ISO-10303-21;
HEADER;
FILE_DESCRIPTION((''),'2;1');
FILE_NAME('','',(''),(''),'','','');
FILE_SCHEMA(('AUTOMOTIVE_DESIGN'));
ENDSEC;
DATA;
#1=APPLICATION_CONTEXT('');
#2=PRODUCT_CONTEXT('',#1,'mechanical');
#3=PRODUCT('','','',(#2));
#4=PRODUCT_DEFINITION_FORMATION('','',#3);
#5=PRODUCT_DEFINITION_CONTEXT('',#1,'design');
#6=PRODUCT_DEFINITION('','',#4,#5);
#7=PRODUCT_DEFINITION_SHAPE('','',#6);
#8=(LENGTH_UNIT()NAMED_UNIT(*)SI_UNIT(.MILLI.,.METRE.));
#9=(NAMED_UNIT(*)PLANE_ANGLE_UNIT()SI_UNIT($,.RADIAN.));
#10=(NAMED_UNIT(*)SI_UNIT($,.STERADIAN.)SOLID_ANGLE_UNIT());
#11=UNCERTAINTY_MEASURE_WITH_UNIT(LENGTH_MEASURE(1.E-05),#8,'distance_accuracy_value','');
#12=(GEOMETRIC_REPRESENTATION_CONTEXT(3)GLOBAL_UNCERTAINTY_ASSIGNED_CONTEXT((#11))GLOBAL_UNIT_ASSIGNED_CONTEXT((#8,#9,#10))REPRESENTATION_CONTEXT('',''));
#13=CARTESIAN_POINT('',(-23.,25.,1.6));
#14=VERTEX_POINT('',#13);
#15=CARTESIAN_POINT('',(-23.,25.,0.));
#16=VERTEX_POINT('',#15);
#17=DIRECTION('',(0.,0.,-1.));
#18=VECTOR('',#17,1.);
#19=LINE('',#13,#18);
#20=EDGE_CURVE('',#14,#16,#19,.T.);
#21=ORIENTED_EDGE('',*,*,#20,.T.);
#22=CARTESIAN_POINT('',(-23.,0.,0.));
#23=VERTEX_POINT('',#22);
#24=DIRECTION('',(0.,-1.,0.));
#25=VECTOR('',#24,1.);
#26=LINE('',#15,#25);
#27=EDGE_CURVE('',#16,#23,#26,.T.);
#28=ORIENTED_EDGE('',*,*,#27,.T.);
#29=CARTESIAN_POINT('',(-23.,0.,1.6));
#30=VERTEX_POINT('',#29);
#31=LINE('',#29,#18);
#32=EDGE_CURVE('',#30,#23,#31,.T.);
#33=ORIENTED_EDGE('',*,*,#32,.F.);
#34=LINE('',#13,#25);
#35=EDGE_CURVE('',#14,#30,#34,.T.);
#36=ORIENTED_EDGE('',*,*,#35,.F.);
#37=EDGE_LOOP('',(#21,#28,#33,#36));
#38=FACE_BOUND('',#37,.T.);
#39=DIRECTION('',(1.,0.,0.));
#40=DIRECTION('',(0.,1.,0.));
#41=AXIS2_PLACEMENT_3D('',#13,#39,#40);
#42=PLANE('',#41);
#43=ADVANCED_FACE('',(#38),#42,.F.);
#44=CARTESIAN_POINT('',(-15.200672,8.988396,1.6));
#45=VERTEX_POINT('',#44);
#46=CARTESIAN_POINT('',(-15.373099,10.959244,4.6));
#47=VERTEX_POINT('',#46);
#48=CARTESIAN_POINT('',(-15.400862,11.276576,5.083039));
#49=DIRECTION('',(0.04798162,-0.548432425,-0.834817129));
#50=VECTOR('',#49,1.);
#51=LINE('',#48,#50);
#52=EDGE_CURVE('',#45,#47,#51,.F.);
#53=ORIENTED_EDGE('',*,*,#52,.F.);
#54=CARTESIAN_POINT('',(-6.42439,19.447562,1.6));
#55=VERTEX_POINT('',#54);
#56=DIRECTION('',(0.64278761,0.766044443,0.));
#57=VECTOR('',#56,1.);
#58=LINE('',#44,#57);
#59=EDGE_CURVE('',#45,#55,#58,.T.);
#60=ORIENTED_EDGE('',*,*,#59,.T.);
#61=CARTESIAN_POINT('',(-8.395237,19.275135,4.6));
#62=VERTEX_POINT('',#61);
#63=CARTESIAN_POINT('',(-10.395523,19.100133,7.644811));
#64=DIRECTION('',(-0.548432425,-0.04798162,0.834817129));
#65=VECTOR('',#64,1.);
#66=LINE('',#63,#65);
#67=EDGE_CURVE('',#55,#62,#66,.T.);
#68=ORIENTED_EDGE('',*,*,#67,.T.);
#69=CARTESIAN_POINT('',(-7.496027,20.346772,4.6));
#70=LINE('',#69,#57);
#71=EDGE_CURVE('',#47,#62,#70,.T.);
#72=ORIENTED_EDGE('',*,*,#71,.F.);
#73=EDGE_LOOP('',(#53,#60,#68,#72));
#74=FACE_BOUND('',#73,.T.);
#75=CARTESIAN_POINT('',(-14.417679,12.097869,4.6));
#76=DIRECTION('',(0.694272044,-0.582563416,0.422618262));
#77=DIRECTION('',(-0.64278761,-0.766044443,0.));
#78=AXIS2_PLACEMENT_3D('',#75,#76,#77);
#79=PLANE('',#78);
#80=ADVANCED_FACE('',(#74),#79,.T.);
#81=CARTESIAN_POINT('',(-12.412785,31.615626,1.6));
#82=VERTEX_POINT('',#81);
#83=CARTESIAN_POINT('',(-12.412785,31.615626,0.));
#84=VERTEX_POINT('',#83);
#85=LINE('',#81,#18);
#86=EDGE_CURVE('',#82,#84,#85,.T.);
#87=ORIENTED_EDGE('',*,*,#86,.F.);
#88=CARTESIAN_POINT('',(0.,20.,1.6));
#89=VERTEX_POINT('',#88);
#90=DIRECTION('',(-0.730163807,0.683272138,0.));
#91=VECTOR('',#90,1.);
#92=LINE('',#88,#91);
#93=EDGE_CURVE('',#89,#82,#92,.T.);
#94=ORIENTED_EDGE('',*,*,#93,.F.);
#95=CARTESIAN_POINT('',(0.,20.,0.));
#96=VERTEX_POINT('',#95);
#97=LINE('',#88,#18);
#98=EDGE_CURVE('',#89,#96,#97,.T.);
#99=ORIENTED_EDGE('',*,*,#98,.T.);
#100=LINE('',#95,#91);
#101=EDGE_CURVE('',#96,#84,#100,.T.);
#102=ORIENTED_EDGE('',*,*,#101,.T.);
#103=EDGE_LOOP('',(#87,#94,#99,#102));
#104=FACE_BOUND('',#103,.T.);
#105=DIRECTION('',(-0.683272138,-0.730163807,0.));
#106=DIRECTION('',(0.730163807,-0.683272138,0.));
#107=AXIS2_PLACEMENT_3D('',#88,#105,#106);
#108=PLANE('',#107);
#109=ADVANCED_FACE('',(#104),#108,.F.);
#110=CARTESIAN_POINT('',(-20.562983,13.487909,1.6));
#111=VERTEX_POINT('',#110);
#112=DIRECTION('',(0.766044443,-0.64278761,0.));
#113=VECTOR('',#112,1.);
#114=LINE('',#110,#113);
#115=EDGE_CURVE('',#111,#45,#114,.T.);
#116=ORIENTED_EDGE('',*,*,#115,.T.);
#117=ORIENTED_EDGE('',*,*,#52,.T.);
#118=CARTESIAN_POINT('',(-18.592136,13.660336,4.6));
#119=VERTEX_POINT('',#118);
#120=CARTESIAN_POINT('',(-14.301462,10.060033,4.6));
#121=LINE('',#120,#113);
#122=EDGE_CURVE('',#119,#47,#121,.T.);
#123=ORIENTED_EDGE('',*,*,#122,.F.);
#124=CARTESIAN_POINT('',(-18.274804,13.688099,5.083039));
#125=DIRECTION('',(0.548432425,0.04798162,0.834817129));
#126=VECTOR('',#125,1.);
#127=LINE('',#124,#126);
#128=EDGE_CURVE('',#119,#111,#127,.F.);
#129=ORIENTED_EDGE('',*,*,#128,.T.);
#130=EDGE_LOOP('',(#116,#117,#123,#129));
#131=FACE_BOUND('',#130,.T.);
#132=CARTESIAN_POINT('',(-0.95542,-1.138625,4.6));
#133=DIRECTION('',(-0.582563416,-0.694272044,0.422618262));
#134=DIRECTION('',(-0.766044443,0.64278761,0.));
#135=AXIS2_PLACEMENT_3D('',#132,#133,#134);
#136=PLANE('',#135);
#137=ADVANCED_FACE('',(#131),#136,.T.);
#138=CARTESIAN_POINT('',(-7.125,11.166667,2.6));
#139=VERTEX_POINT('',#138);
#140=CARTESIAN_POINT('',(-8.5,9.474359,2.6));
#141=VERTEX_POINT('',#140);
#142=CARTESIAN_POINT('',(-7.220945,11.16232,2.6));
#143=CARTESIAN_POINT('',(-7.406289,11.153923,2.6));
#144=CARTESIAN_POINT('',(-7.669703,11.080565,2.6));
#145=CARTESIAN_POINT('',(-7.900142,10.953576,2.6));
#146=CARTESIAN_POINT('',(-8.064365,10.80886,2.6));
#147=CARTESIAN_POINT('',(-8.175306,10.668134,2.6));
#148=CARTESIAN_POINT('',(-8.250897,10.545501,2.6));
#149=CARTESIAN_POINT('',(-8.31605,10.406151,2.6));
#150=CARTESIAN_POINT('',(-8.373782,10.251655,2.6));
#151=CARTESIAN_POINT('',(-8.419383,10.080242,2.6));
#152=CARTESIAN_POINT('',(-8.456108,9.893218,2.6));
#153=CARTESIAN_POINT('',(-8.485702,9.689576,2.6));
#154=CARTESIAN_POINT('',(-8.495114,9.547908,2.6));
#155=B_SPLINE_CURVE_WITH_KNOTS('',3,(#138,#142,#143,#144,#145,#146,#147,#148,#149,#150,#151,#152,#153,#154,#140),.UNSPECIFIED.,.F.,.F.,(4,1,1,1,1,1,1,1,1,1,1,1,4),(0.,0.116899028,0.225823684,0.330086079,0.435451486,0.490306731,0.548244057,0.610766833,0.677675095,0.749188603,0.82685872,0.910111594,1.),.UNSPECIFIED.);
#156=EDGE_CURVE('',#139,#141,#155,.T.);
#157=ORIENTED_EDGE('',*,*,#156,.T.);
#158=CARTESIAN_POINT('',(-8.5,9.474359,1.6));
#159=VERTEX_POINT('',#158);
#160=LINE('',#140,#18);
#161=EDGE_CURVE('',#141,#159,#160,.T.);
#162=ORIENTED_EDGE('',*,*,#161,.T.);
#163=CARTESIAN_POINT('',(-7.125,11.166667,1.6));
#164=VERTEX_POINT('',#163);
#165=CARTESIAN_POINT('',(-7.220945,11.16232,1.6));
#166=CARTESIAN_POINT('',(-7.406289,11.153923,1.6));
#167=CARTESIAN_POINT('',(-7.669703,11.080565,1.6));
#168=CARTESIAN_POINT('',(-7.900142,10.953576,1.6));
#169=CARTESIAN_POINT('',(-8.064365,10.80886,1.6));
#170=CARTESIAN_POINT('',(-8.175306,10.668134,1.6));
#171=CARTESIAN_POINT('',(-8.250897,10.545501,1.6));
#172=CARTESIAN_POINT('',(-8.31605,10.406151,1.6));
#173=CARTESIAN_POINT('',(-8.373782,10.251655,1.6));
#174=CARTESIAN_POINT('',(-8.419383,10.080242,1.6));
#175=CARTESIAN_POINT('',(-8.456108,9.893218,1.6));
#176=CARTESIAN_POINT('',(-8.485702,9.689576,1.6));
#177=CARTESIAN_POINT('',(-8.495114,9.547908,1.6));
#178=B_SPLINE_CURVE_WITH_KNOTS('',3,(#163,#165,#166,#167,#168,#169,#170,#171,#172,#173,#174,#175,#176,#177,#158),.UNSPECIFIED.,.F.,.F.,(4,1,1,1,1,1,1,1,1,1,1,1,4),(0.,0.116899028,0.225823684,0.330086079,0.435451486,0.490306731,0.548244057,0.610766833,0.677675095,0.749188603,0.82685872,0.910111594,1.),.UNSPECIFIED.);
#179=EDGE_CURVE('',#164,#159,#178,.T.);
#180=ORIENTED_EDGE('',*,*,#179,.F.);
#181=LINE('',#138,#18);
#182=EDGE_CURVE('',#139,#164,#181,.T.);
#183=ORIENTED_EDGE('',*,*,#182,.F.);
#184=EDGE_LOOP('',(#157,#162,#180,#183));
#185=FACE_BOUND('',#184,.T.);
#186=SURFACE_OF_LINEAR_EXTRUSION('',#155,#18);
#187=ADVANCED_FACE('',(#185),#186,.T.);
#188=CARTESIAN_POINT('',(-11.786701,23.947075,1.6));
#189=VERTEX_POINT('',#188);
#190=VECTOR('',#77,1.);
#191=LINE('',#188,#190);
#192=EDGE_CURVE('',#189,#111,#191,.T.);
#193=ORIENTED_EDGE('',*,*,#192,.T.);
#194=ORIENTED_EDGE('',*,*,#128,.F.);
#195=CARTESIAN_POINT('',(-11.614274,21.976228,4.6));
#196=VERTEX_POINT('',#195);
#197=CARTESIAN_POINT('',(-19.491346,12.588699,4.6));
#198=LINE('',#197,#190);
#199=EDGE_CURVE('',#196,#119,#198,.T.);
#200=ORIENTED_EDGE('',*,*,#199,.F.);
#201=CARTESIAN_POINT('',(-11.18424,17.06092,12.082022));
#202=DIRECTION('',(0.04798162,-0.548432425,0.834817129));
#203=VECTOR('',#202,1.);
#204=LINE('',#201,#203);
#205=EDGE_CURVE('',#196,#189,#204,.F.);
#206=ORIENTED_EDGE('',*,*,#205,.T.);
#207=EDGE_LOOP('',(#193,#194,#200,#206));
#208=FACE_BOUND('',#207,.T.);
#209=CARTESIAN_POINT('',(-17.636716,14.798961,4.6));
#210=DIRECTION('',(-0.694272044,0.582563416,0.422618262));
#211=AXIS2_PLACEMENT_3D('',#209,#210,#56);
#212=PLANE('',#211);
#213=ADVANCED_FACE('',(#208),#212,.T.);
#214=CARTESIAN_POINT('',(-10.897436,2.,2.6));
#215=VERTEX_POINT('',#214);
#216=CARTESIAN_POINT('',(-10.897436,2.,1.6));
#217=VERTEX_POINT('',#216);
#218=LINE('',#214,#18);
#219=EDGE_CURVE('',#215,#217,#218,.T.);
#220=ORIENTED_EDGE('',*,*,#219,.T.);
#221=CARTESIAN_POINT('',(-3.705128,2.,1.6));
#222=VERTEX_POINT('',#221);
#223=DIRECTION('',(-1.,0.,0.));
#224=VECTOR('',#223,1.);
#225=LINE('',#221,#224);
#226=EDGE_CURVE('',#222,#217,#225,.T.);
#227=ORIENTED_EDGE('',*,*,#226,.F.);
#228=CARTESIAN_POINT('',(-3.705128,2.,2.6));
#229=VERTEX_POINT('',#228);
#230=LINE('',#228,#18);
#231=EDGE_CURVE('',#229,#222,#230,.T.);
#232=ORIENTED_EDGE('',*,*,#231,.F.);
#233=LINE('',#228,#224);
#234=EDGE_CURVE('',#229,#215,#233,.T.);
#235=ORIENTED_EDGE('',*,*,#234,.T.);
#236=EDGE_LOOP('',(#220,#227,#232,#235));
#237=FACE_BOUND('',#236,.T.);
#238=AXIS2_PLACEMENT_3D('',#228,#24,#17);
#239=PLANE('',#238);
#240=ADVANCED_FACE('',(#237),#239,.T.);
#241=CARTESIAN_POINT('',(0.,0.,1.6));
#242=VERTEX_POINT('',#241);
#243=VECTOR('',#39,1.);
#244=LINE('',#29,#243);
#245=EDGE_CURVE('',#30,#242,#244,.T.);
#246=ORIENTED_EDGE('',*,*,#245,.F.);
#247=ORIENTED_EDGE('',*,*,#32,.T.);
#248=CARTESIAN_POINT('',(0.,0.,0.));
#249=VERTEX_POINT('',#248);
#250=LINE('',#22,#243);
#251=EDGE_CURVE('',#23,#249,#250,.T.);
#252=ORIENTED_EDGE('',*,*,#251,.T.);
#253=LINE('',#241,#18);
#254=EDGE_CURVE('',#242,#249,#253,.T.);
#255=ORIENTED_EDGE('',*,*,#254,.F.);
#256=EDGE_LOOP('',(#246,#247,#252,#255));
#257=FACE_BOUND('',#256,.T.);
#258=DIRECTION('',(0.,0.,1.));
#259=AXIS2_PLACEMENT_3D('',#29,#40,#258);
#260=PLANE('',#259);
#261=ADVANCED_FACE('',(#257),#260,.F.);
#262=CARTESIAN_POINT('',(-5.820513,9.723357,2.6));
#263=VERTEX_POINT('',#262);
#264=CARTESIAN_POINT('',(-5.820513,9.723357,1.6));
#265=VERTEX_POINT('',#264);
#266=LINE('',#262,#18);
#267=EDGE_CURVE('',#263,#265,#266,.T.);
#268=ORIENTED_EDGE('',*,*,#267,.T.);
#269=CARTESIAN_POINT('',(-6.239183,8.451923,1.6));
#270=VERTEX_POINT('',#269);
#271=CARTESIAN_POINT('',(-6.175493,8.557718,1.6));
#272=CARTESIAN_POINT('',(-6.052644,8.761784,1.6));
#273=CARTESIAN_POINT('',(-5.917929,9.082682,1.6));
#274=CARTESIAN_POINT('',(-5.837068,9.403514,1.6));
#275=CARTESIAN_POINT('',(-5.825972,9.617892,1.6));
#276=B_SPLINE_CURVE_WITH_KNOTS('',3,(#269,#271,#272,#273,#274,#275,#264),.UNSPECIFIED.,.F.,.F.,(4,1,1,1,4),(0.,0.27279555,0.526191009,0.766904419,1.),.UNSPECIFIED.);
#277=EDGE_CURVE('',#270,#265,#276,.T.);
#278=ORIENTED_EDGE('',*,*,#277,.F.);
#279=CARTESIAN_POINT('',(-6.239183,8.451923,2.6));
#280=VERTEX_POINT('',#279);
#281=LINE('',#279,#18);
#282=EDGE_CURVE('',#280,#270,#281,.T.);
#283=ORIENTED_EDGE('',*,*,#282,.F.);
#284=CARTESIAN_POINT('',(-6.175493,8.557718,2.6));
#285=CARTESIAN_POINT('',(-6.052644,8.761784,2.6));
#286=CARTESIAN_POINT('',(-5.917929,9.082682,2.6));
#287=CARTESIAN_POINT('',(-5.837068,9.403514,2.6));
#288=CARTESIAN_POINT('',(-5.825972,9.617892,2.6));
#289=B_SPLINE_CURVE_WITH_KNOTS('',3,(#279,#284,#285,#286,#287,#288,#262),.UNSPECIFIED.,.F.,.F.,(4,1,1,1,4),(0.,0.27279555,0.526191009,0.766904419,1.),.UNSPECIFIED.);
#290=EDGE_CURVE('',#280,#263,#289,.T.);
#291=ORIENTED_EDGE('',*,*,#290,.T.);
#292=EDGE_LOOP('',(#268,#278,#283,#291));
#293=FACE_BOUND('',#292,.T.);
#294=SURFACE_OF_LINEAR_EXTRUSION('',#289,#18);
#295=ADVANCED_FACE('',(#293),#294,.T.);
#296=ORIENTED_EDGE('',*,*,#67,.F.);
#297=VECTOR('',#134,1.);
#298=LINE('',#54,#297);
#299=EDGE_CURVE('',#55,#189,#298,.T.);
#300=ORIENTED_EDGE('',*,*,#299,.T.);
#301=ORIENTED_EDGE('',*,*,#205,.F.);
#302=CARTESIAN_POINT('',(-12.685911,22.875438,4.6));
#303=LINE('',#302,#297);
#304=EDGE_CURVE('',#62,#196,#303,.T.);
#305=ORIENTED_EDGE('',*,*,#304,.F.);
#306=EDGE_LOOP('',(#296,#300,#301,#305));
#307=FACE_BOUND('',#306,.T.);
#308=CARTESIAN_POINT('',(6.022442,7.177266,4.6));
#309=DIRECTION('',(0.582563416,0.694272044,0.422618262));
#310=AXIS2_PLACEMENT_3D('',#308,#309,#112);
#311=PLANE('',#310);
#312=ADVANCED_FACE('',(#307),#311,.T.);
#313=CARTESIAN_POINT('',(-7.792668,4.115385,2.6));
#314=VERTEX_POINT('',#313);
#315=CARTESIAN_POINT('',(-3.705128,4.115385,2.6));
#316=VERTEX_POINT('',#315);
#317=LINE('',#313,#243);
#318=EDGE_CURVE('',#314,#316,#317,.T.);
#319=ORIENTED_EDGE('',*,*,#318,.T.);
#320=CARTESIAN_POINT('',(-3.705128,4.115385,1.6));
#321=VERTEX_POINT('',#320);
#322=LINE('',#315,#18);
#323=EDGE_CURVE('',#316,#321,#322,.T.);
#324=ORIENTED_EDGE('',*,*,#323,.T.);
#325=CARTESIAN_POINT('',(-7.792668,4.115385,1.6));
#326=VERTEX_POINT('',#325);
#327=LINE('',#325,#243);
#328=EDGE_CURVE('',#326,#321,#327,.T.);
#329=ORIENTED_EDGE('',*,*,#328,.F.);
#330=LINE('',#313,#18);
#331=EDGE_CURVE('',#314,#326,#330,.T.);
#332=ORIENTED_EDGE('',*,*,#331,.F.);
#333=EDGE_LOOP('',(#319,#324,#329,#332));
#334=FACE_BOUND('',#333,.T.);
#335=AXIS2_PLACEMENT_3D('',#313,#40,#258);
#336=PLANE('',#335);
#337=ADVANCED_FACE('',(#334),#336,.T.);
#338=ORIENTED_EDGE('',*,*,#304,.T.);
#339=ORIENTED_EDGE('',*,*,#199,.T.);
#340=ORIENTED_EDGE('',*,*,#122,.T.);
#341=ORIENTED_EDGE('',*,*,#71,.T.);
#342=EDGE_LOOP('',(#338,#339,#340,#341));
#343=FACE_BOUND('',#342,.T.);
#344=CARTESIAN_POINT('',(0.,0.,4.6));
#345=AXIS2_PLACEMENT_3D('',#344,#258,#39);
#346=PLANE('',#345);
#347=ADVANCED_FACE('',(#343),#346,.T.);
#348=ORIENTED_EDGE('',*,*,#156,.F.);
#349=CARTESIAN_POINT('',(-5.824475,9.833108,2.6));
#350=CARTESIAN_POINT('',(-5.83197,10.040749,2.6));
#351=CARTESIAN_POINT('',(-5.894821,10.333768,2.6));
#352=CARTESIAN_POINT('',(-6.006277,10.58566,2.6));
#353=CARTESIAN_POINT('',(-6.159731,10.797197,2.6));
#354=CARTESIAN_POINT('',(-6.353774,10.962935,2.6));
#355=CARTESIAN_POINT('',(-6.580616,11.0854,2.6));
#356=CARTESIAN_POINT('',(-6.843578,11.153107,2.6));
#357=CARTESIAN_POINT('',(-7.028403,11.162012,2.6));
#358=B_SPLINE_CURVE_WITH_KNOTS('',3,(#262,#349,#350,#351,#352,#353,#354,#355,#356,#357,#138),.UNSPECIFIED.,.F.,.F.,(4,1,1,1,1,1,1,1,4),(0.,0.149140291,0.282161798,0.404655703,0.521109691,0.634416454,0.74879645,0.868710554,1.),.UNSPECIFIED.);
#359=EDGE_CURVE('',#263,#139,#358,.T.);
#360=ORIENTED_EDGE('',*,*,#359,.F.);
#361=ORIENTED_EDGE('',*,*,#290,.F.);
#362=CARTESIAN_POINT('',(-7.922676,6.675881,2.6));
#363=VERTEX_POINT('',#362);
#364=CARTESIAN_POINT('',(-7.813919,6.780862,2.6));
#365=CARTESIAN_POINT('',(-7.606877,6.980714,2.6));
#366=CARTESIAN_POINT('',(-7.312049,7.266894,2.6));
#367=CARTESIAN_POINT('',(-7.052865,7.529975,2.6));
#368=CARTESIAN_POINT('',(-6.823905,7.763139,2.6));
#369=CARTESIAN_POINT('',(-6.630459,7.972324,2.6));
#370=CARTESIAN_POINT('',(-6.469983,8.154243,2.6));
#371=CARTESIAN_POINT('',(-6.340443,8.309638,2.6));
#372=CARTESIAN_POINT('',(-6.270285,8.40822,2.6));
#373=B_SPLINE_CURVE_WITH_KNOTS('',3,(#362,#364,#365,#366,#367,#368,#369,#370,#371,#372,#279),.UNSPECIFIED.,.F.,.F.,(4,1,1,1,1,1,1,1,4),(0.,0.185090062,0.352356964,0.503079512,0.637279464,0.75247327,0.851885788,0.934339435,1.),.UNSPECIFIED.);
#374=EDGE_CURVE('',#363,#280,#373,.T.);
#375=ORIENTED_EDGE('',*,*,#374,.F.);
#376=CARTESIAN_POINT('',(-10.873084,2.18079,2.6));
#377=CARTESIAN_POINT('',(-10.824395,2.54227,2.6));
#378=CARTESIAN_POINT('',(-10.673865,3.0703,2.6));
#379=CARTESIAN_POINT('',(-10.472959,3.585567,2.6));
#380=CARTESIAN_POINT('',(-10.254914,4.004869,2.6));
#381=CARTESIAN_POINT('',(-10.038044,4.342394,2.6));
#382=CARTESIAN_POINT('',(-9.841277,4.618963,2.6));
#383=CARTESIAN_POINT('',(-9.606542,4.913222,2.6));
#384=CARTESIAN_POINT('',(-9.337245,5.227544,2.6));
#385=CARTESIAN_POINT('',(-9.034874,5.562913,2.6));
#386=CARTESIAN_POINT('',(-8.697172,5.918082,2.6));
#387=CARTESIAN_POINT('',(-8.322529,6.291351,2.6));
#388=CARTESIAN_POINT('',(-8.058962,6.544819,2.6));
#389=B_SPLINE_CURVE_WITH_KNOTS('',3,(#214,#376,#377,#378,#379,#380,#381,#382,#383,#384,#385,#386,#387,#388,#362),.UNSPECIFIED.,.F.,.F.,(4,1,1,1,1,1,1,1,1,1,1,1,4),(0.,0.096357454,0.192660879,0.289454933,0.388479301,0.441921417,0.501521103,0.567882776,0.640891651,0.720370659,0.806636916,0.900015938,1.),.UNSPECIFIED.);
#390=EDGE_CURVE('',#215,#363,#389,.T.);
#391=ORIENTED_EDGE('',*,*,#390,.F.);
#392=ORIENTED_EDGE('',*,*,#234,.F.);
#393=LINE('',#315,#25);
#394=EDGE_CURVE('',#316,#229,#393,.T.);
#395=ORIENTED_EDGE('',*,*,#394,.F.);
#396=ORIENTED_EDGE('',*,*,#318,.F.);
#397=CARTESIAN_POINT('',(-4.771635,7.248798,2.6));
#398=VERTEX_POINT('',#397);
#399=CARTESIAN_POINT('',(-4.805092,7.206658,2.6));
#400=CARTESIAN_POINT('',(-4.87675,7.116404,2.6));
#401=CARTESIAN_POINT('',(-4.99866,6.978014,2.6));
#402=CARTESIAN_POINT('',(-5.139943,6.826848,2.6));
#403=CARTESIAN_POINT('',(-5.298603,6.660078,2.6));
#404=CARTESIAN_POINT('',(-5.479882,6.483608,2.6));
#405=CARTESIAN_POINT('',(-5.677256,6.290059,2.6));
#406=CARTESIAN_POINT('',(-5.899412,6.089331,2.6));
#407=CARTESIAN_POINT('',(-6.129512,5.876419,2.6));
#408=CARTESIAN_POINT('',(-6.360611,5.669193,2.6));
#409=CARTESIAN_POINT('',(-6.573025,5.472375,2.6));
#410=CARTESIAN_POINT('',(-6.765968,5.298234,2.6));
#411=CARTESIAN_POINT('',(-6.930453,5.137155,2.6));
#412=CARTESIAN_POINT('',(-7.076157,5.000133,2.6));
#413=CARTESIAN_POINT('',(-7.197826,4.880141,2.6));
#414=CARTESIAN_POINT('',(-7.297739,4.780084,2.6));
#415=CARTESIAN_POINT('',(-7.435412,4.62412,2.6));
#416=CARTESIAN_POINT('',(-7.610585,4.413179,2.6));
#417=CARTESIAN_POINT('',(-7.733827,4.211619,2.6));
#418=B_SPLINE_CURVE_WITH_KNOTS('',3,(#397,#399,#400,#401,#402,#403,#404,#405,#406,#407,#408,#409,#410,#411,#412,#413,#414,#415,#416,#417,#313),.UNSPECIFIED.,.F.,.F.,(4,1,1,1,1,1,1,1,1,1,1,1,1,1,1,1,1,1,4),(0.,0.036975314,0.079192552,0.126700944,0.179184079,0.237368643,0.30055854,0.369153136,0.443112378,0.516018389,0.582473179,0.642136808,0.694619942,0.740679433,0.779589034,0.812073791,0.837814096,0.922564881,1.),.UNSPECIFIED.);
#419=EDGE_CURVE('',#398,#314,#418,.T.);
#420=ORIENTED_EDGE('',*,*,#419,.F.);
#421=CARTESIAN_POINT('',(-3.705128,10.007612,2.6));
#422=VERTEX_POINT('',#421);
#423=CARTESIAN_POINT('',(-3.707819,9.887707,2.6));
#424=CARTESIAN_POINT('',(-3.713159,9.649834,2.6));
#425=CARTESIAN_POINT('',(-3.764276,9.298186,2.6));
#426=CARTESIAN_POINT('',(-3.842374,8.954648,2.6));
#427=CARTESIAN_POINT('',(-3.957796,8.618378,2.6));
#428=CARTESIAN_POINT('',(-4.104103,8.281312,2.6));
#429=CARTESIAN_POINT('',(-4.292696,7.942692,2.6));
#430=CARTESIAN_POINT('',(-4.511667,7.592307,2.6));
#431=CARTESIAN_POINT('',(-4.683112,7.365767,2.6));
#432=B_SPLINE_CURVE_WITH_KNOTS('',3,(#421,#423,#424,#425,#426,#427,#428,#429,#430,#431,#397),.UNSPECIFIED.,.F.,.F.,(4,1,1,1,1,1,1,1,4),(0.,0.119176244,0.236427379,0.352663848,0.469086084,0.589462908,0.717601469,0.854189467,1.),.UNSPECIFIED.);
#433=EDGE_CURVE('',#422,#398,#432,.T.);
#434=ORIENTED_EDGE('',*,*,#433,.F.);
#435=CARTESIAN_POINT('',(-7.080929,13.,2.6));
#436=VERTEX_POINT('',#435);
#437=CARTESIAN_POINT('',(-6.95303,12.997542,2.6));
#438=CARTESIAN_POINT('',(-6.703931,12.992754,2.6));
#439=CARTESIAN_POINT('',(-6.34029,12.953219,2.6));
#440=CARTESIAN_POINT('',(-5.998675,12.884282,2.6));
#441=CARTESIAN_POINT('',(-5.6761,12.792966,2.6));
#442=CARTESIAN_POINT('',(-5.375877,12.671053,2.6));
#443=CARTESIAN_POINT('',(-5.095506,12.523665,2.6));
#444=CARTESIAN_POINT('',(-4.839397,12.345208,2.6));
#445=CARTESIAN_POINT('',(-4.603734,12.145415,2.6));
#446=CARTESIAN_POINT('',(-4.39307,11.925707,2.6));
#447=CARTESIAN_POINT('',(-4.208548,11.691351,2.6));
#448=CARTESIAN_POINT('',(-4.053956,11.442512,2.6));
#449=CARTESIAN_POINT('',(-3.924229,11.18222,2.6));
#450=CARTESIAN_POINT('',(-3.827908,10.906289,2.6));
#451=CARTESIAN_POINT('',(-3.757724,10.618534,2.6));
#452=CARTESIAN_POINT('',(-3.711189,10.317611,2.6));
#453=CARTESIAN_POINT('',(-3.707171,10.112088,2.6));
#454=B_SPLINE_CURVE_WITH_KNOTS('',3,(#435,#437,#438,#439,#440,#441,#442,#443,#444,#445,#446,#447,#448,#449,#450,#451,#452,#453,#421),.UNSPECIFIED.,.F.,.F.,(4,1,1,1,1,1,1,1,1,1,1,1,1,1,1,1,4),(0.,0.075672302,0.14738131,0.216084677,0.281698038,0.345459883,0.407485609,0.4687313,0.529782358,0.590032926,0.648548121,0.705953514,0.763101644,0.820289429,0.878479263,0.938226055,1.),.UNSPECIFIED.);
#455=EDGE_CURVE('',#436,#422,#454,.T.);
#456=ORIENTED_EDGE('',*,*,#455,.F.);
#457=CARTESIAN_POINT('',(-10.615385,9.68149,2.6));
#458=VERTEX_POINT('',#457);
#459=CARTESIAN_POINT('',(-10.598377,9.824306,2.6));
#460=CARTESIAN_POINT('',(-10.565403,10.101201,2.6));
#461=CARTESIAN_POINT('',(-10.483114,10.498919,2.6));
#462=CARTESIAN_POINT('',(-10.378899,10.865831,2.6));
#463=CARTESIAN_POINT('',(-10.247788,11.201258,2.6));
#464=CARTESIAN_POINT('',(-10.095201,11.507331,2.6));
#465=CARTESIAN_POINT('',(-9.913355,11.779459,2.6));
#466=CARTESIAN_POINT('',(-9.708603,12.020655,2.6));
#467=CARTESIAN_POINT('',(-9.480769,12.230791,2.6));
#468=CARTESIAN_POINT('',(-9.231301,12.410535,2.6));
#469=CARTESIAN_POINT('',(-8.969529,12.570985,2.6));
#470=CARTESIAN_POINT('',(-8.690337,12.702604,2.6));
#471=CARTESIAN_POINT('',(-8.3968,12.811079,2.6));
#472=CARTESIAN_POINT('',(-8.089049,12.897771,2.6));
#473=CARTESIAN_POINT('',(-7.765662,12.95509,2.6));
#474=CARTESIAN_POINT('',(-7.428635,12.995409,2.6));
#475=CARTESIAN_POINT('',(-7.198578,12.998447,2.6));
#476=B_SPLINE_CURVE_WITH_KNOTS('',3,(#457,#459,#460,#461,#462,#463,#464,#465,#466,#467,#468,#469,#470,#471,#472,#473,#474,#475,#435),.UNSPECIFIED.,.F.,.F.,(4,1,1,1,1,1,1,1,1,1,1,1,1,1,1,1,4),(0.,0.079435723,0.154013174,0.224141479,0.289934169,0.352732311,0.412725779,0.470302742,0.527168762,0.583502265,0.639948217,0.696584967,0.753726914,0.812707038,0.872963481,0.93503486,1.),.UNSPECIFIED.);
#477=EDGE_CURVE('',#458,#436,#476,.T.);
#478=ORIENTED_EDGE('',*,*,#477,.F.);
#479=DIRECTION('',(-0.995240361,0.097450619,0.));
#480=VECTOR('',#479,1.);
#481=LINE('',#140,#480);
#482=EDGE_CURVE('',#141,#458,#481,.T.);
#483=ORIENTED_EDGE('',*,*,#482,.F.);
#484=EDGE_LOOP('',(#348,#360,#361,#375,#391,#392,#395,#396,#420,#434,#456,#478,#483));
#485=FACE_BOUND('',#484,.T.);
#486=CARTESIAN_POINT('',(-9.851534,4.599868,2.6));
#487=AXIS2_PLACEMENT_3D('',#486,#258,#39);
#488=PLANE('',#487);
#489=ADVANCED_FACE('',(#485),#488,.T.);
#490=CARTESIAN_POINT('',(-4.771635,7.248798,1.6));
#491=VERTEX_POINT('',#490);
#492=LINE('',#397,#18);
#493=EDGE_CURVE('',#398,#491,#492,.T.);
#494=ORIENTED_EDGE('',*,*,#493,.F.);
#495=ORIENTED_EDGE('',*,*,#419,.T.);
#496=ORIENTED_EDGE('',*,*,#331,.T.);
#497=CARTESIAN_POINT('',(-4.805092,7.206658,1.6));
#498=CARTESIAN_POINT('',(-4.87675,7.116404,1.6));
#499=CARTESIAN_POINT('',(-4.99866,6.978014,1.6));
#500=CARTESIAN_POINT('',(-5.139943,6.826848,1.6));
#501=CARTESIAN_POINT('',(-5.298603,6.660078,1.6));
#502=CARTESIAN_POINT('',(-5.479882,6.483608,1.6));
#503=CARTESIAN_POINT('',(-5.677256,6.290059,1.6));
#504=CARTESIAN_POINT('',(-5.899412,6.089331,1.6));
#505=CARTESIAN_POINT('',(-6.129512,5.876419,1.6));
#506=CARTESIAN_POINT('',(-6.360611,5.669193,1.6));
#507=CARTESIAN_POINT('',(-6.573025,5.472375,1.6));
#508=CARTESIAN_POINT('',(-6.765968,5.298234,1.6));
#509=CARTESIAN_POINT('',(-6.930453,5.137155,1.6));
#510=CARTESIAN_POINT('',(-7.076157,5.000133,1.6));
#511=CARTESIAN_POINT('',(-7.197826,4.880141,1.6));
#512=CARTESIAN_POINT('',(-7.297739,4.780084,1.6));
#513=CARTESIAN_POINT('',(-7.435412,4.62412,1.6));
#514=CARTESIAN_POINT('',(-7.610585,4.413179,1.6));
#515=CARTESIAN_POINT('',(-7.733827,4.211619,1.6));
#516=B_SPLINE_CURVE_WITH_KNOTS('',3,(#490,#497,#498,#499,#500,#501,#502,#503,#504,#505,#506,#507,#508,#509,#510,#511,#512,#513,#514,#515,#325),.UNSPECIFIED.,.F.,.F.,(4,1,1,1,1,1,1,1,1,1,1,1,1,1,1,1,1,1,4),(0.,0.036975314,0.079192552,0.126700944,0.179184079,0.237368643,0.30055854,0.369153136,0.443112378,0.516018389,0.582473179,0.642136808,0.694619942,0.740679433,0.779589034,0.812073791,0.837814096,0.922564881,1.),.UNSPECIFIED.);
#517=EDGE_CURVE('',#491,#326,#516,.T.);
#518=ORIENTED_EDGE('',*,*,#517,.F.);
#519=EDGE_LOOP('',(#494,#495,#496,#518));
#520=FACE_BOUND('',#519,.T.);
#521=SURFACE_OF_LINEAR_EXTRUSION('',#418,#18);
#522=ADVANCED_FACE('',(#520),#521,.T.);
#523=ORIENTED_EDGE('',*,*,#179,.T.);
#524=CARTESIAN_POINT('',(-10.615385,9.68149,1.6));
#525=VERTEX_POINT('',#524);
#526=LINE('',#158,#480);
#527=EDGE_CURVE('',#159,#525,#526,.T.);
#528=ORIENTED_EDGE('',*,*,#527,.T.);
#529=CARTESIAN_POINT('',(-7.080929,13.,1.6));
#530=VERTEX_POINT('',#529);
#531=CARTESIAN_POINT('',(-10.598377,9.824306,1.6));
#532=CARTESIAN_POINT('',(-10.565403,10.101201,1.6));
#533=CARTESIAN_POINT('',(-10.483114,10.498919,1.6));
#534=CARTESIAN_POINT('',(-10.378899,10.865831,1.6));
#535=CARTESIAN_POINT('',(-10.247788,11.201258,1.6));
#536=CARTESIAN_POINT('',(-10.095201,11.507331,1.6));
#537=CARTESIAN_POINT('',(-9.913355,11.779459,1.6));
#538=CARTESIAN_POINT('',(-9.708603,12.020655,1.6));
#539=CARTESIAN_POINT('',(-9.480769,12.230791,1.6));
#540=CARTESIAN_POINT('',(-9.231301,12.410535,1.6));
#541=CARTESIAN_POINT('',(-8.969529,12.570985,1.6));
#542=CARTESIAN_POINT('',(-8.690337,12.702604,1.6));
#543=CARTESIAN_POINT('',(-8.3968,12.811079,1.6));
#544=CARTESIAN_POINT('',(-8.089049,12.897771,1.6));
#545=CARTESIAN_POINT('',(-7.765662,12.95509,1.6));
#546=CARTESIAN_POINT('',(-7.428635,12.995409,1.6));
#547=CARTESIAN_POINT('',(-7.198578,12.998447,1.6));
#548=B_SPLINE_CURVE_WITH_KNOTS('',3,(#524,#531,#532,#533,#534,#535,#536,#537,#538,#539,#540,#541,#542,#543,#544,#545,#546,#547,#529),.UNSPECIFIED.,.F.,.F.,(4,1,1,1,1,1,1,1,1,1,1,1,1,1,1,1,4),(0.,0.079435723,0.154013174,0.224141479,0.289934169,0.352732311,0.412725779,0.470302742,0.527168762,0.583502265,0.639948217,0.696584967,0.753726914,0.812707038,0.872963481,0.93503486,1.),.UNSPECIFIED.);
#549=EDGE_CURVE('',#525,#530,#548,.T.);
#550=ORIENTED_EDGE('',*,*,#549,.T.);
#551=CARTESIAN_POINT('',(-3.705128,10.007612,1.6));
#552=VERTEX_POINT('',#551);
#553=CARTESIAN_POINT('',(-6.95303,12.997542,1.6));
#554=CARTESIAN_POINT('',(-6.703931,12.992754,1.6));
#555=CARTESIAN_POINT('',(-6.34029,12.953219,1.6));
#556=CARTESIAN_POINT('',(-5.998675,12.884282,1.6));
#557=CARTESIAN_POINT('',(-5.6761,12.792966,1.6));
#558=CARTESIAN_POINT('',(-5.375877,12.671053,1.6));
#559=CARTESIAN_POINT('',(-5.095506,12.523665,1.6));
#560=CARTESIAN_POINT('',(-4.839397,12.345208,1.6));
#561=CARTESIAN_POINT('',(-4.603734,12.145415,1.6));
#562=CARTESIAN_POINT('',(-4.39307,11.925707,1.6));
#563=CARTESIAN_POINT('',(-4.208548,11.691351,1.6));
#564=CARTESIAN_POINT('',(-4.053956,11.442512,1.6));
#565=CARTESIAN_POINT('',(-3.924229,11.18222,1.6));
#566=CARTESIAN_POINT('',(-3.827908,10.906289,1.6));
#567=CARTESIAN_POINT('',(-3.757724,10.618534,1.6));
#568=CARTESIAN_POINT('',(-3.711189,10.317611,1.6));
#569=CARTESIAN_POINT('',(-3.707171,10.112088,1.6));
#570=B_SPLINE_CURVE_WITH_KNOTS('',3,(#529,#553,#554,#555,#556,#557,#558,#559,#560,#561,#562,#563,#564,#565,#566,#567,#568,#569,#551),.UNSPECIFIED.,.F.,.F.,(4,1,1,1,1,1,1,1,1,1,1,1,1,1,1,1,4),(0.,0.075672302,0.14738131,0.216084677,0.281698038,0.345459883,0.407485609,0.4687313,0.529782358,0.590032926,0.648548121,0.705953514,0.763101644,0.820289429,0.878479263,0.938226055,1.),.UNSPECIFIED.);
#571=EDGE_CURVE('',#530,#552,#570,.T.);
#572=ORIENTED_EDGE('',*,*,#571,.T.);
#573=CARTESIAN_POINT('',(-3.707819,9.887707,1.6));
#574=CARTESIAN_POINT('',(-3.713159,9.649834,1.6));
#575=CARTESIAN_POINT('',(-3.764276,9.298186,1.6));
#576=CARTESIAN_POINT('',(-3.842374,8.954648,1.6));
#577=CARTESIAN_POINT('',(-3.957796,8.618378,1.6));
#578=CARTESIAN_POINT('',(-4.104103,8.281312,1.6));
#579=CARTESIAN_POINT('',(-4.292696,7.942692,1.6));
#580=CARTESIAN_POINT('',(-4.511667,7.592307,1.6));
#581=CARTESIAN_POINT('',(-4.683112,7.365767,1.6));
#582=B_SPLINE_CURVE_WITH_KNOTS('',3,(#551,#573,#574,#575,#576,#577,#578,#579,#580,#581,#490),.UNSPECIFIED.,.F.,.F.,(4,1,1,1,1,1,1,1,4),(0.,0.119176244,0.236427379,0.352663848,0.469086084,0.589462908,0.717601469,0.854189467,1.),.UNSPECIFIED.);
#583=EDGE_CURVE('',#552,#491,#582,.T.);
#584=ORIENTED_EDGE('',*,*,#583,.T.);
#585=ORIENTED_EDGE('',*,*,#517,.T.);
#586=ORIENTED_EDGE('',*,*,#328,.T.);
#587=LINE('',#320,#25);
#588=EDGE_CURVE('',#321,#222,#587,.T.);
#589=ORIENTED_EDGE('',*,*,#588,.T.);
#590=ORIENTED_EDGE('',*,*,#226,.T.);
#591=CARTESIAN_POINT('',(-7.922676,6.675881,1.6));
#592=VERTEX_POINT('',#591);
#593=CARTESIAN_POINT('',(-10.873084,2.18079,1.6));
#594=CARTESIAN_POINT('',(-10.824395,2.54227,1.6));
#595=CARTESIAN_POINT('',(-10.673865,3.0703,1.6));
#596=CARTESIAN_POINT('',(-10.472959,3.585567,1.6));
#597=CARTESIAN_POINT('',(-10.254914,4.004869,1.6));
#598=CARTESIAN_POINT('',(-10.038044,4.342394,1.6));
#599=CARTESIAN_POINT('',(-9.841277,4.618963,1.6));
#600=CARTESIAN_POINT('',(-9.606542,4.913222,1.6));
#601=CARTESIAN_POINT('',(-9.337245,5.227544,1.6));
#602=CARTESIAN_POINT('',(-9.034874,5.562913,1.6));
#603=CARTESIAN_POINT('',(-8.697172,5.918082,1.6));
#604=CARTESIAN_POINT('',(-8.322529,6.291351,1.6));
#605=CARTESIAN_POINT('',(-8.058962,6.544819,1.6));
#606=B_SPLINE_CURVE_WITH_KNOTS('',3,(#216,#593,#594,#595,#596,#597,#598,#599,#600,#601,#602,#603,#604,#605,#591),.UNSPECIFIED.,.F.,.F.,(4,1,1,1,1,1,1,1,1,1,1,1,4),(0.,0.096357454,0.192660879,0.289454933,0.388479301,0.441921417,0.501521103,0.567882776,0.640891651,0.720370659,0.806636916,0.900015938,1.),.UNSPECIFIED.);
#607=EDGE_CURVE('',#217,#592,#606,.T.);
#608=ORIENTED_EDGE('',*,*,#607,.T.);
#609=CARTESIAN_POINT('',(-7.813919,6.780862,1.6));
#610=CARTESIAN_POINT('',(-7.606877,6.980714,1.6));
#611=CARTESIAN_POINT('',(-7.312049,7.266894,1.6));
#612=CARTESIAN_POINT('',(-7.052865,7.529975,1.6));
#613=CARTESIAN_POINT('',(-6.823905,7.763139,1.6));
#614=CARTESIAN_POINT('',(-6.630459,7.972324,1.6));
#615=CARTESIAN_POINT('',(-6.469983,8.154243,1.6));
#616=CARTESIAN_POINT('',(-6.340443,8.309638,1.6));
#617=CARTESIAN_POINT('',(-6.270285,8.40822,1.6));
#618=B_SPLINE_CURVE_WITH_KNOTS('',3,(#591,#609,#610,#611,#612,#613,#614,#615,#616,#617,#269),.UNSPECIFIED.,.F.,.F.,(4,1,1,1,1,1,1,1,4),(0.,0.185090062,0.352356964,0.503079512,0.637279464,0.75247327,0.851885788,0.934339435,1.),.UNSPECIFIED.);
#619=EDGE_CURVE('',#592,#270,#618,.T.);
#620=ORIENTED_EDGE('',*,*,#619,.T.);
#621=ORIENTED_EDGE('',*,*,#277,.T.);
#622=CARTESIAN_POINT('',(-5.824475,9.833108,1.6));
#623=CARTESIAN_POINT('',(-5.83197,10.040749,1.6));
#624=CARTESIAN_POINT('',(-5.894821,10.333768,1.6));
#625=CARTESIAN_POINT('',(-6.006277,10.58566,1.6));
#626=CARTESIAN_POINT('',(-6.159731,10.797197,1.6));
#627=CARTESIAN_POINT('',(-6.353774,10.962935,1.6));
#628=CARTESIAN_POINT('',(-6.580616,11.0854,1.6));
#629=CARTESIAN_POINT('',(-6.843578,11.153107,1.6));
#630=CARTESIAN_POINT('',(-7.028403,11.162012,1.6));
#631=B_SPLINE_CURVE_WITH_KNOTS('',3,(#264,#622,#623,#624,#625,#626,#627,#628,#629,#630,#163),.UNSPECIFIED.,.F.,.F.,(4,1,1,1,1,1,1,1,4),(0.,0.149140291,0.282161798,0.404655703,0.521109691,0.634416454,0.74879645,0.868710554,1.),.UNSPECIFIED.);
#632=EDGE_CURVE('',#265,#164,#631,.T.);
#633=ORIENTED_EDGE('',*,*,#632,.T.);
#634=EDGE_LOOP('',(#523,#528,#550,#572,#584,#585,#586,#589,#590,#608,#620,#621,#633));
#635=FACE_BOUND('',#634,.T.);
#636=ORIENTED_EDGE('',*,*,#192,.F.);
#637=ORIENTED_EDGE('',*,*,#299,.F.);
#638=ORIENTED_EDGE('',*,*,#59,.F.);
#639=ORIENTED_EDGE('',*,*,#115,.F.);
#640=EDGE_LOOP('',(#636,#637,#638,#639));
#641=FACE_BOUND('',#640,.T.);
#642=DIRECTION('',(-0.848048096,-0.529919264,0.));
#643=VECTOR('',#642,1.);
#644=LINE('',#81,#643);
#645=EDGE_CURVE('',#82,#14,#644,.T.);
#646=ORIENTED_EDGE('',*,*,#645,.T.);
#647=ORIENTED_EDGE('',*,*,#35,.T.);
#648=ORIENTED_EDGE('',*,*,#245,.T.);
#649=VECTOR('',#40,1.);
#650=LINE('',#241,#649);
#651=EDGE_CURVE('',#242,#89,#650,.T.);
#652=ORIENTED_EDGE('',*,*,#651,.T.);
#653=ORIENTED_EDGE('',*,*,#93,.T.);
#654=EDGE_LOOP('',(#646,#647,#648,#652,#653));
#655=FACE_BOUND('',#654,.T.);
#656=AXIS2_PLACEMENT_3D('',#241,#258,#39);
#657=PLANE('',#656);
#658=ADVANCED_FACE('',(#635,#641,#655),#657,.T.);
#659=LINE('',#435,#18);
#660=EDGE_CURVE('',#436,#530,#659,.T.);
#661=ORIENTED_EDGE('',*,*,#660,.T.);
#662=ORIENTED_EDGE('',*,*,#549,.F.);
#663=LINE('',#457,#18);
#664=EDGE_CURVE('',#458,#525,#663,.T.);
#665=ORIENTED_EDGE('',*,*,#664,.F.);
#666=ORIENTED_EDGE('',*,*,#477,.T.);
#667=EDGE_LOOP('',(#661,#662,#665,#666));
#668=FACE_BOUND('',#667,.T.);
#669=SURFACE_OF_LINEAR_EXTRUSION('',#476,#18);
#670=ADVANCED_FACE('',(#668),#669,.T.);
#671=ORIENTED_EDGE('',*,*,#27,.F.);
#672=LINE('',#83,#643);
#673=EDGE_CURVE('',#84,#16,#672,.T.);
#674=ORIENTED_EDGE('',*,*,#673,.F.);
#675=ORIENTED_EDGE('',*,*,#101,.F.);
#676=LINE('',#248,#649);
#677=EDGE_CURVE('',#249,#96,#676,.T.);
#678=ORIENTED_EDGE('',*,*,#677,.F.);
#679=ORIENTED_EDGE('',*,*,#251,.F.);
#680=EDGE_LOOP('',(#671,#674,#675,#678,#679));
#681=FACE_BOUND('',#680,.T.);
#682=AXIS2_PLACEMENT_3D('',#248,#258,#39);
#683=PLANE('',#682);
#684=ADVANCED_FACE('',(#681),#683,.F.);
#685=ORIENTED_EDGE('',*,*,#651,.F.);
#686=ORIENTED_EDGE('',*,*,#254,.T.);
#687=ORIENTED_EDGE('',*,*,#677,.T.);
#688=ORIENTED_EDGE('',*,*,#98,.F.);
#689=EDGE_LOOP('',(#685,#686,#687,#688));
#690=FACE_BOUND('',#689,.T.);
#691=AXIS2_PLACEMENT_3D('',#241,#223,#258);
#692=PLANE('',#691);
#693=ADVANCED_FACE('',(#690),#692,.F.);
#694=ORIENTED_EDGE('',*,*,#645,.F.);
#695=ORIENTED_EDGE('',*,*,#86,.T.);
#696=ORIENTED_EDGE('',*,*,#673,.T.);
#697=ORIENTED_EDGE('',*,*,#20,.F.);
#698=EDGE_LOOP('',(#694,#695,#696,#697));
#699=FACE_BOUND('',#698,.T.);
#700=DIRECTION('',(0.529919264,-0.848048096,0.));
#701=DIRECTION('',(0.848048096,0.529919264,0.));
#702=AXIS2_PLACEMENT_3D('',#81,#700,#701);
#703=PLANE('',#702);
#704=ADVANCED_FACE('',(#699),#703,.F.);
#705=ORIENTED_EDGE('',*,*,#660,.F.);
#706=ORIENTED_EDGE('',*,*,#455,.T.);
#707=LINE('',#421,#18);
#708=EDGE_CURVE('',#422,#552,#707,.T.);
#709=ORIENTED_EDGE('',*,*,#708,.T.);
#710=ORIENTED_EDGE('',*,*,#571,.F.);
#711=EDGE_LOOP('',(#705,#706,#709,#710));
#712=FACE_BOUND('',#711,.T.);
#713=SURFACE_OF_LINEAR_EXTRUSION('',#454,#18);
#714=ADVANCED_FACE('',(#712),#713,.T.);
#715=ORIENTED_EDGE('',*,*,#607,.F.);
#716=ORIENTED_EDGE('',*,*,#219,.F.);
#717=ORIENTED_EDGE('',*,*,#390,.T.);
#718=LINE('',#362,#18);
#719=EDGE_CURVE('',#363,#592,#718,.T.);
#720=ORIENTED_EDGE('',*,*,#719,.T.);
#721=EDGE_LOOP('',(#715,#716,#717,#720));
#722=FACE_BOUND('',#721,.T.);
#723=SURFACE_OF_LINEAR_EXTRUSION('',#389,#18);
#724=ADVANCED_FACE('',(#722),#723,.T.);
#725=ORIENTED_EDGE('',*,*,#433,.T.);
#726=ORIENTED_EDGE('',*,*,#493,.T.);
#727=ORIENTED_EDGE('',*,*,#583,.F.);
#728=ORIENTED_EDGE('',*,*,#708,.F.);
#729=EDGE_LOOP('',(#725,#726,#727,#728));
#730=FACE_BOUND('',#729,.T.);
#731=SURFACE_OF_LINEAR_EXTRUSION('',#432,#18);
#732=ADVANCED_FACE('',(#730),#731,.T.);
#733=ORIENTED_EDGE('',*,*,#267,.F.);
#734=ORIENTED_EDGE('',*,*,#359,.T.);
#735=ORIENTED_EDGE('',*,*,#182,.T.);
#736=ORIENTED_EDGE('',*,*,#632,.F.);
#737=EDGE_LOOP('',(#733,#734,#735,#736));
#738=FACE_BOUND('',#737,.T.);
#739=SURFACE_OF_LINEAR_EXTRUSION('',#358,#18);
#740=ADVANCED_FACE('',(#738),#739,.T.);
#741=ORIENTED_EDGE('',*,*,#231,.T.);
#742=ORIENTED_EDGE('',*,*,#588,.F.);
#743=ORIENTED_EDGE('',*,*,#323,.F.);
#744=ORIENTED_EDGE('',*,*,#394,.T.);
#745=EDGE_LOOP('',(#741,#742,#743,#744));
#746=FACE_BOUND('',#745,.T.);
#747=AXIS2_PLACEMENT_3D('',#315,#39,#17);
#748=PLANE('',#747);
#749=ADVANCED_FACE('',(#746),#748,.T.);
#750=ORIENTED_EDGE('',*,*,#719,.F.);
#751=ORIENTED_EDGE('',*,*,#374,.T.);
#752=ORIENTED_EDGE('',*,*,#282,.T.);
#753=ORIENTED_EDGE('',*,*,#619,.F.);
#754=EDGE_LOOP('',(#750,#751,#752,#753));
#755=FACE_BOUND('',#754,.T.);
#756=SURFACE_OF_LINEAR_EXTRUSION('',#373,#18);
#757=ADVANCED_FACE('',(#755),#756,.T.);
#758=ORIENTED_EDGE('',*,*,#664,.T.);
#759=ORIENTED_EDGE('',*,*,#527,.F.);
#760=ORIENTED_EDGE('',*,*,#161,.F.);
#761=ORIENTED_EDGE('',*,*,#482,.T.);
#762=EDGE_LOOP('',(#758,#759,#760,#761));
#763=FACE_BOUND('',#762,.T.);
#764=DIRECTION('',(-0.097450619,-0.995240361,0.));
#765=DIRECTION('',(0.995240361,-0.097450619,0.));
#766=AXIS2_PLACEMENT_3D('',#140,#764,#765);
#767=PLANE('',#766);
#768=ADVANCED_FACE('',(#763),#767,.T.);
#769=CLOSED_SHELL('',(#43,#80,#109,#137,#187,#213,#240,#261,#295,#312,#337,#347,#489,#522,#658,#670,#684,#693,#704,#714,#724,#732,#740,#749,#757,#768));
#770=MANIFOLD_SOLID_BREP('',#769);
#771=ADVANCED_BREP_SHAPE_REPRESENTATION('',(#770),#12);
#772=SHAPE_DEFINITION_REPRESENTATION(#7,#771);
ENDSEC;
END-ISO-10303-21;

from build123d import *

# Parameters (mm, degrees)
P_IDAT_VYSUNUT_M5_DEPTH = 1.6
P_IDAT_VYSUNUT_M6_DEPTH = 1
P_IDAT_VYSUNUT_M7_DEPTH = 3
ZKOSEN_1_SIZE           = 3
ZKOSEN_1_SIZE_2         = 1.398922974


with BuildPart() as part:
    # Skica1 → Přidat vysunutím5 (new body)
    with BuildSketch(Plane.XY):
        Polygon((0, 0), (0, 20), (-12.412784718, 31.615626352), (-23, 25), (-23, 0), align=None)
    extrude(amount=P_IDAT_VYSUNUT_M5_DEPTH)

    # Skica2 → Přidat vysunutím6 (add)
    with BuildSketch(Plane.XY.offset(1.6)):
        with BuildLine():
            Line((-3.705128205, 4.115384615), (-3.705128205, 2))
            Line((-3.705128205, 2), (-10.897435897, 2))
            add(Edge.make_bspline(
                [(-10.897435897, 2), (-10.87308441, 2.180790308), (-10.824395089, 2.542269551), (-10.673865117, 3.070299742), (-10.472959166, 3.585566992), (-10.254913916, 4.004869463), (-10.038043764, 4.342393523), (-9.841277463, 4.618963346), (-9.60654249, 4.913221767), (-9.337245105, 5.227544267), (-9.034873554, 5.562913411), (-8.697171951, 5.918082368), (-8.322529407, 6.291350846), (-8.058961705, 6.54481851), (-7.922676282, 6.67588141)],
                knots=[0, 0, 0, 0, 1.156289446, 2.311930546, 3.473459201, 4.661751613, 5.303057008, 6.018253237, 6.81459331, 7.690699809, 8.644447906, 9.679642995, 10.800191253, 12, 12, 12, 12], degree=3))
            add(Edge.make_bspline(
                [(-7.922676282, 6.67588141), (-7.813918956, 6.780862005), (-7.606877039, 6.980714138), (-7.312048947, 7.266894293), (-7.052864674, 7.529975199), (-6.823905036, 7.763139303), (-6.630459323, 7.972323552), (-6.469982936, 8.154242742), (-6.34044346, 8.309637702), (-6.270284768, 8.408220362), (-6.239182692, 8.451923077)],
                knots=[0, 0, 0, 0, 1.480720495, 2.818855715, 4.024636094, 5.098235712, 6.019786162, 6.815086302, 7.474715479, 8, 8, 8, 8], degree=3))
            add(Edge.make_bspline(
                [(-6.239182692, 8.451923077), (-6.175493233, 8.557718073), (-6.052643645, 8.761784362), (-5.91792888, 9.082682292), (-5.837068057, 9.403513936), (-5.825971765, 9.617891805), (-5.820512821, 9.723357372)],
                knots=[0, 0, 0, 0, 1.0911822, 2.104764037, 3.067617678, 4, 4, 4, 4], degree=3))
            add(Edge.make_bspline(
                [(-5.820512821, 9.723357372), (-5.824474653, 9.833108474), (-5.831970132, 10.040748999), (-5.894821019, 10.333768175), (-6.006276867, 10.585659667), (-6.15973106, 10.797196661), (-6.353774193, 10.962935085), (-6.580616259, 11.085399693), (-6.843577862, 11.153106661), (-7.028402789, 11.16201224), (-7.125, 11.166666667)],
                knots=[0, 0, 0, 0, 1.193122327, 2.257294386, 3.237245624, 4.168877528, 5.075331632, 5.990371598, 6.949684428, 8, 8, 8, 8], degree=3))
            add(Edge.make_bspline(
                [(-7.125, 11.166666667), (-7.220944609, 11.16231978), (-7.406288878, 11.153922533), (-7.669703299, 11.080565334), (-7.900142302, 10.953576306), (-8.06436539, 10.808860058), (-8.175305876, 10.668134018), (-8.250896853, 10.545500545), (-8.316050374, 10.406151312), (-8.37378183, 10.251655158), (-8.419383153, 10.080242168), (-8.456107626, 9.893217825), (-8.485702239, 9.689575671), (-8.495113848, 9.547907653), (-8.5, 9.474358974)],
                knots=[0, 0, 0, 0, 1.402788338, 2.709884207, 3.961032948, 5.225417836, 5.883680772, 6.578928686, 7.329201998, 8.132101139, 8.990263233, 9.922304639, 10.921339128, 12, 12, 12, 12], degree=3))
            Line((-8.5, 9.474358974), (-10.615384615, 9.681490385))
            add(Edge.make_bspline(
                [(-10.615384615, 9.681490385), (-10.598377251, 9.824305509), (-10.565402688, 10.101201217), (-10.483114114, 10.498918926), (-10.378898684, 10.865831465), (-10.247788098, 11.201257911), (-10.095201314, 11.507331251), (-9.913355139, 11.779458664), (-9.708603468, 12.020654551), (-9.480769352, 12.230790543), (-9.231301205, 12.410535137), (-8.969529148, 12.57098477), (-8.690337423, 12.702604473), (-8.396799939, 12.811078884), (-8.089049352, 12.897770766), (-7.765662274, 12.955090263), (-7.42863453, 12.995409017), (-7.198577984, 12.998446608), (-7.080929487, 13)],
                knots=[0, 0, 0, 0, 1.270971563, 2.464210789, 3.586263665, 4.638946707, 5.643716971, 6.603612468, 7.52484387, 8.434700188, 9.336036235, 10.239171475, 11.145359471, 12.059630629, 13.003312604, 13.96741569, 14.960557767, 16, 16, 16, 16], degree=3))
            add(Edge.make_bspline(
                [(-7.080929487, 13), (-6.953030371, 12.997541845), (-6.703930784, 12.992754281), (-6.34028961, 12.953218534), (-5.998674853, 12.884282231), (-5.676099879, 12.79296634), (-5.375877361, 12.67105295), (-5.095505554, 12.52366473), (-4.83939702, 12.345207999), (-4.603734114, 12.145414763), (-4.393070332, 11.925706984), (-4.20854792, 11.691351493), (-4.053955652, 11.442511564), (-3.924228998, 11.182220281), (-3.827907833, 10.90628918), (-3.757724044, 10.618533633), (-3.711189366, 10.317611197), (-3.707170936, 10.112088), (-3.705128205, 10.007612179)],
                knots=[0, 0, 0, 0, 1.210756838, 2.35810096, 3.457354827, 4.507168606, 5.527358126, 6.519769748, 7.499700793, 8.476517721, 9.440526811, 10.376769937, 11.295256217, 12.209626307, 13.124630862, 14.055668209, 15.011616881, 16, 16, 16, 16], degree=3))
            add(Edge.make_bspline(
                [(-3.705128205, 10.007612179), (-3.707819477, 9.887707131), (-3.713158546, 9.649833916), (-3.764276175, 9.298186238), (-3.84237396, 8.954647512), (-3.957796338, 8.618378159), (-4.104103161, 8.28131186), (-4.292696164, 7.942692037), (-4.511666905, 7.592306518), (-4.683112364, 7.36576699), (-4.771634615, 7.248798077)],
                knots=[0, 0, 0, 0, 0.953409949, 1.89141903, 2.821310783, 3.752688675, 4.715703262, 5.740811754, 6.833515735, 8, 8, 8, 8], degree=3))
            add(Edge.make_bspline(
                [(-4.771634615, 7.248798077), (-4.80509214, 7.206658226), (-4.876750403, 7.116404431), (-4.998659939, 6.978014195), (-5.139942605, 6.826848432), (-5.298602846, 6.660077667), (-5.479881522, 6.483607708), (-5.677256214, 6.290058721), (-5.899411985, 6.089331377), (-6.12951153, 5.876418507), (-6.360611244, 5.669193404), (-6.5730252, 5.472375498), (-6.765967752, 5.298233923), (-6.930453202, 5.137155265), (-7.076156545, 5.000133027), (-7.197826149, 4.880140867), (-7.29773874, 4.780083699), (-7.43541186, 4.624119958), (-7.610585282, 4.413178934), (-7.733826947, 4.21161882), (-7.792668269, 4.115384615)],
                knots=[0, 0, 0, 0, 0.665555651, 1.425465941, 2.280616993, 3.225313414, 4.272635571, 5.410053715, 6.644756443, 7.976022804, 9.288331007, 10.484517221, 11.558462543, 12.503158964, 13.33222979, 14.032602617, 14.617328242, 15.080653724, 16.606167857, 18, 18, 18, 18], degree=3))
            Line((-7.792668269, 4.115384615), (-3.705128205, 4.115384615))
        make_face()
    extrude(amount=P_IDAT_VYSUNUT_M6_DEPTH)

    # Skica3 → Přidat vysunutím7 (add)
    with BuildSketch(Plane.XY.offset(1.6)):
        Polygon((-15.200672089, 8.988396037), (-6.42438967, 19.447562139), (-11.786700772, 23.947075407), (-20.562983191, 13.487909304), align=None)
    extrude(amount=P_IDAT_VYSUNUT_M7_DEPTH)

    # Zkosení1
    # the kernel refuses this chamfer: 3, 1.398922974 mm, written as the material it takes off along each edge
    with BuildSketch(Plane(origin=(-26.517390277, 18.484250095, 4.6), x_dir=(-0.010484614203041273, -0.012495076643438774, -0.9998669641130704), z_dir=(0.7660444431189795, -0.6427876096865376, 0))) as zkosen_1_piece_1:
        Polygon((ZKOSEN_1_SIZE * 0.999866964113, ZKOSEN_1_SIZE * 0.0163111641311), (-ZKOSEN_1_SIZE_2 * 0.0163111641365, ZKOSEN_1_SIZE_2 * 0.999866964445), (0, 0), align=None)
    extrude(amount=14.772926414, mode=Mode.SUBTRACT)
    with BuildSketch(Plane(origin=(-6.790359982, 29.901482493, 4.6), x_dir=(-0.01249507664343894, 0.010484614203041415, -0.9998669641130704), z_dir=(-0.6427876096865377, -0.7660444431189796, 0)), Plane(origin=(-20.197012879, 3.03398895, 4.6), x_dir=(0.012495076643438493, -0.010484614203041037, -0.9998669641130704), z_dir=(0.6427876096865377, 0.7660444431189796, 0))) as zkosen_1_piece_2:
        Polygon((ZKOSEN_1_SIZE * 0.999866964113, ZKOSEN_1_SIZE * 0.0163111641311), (-ZKOSEN_1_SIZE_2 * 0.0163111641365, ZKOSEN_1_SIZE_2 * 0.999866964445), (0, 0), align=None)
    extrude(amount=29.199324499, mode=Mode.SUBTRACT)
    with BuildSketch(Plane(origin=(-0.469982584, 14.451221349, 4.6), x_dir=(0.010484614203041209, 0.01249507664343868, -0.9998669641130704), z_dir=(-0.766044443118979, 0.6427876096865381, 0))) as zkosen_1_piece_3:
        Polygon((ZKOSEN_1_SIZE * 0.999866964113, ZKOSEN_1_SIZE * 0.0163111641311), (-ZKOSEN_1_SIZE_2 * 0.0163111641365, ZKOSEN_1_SIZE_2 * 0.999866964445), (0, 0), align=None)
    extrude(amount=22.545852829, mode=Mode.SUBTRACT)


solid = part.part
